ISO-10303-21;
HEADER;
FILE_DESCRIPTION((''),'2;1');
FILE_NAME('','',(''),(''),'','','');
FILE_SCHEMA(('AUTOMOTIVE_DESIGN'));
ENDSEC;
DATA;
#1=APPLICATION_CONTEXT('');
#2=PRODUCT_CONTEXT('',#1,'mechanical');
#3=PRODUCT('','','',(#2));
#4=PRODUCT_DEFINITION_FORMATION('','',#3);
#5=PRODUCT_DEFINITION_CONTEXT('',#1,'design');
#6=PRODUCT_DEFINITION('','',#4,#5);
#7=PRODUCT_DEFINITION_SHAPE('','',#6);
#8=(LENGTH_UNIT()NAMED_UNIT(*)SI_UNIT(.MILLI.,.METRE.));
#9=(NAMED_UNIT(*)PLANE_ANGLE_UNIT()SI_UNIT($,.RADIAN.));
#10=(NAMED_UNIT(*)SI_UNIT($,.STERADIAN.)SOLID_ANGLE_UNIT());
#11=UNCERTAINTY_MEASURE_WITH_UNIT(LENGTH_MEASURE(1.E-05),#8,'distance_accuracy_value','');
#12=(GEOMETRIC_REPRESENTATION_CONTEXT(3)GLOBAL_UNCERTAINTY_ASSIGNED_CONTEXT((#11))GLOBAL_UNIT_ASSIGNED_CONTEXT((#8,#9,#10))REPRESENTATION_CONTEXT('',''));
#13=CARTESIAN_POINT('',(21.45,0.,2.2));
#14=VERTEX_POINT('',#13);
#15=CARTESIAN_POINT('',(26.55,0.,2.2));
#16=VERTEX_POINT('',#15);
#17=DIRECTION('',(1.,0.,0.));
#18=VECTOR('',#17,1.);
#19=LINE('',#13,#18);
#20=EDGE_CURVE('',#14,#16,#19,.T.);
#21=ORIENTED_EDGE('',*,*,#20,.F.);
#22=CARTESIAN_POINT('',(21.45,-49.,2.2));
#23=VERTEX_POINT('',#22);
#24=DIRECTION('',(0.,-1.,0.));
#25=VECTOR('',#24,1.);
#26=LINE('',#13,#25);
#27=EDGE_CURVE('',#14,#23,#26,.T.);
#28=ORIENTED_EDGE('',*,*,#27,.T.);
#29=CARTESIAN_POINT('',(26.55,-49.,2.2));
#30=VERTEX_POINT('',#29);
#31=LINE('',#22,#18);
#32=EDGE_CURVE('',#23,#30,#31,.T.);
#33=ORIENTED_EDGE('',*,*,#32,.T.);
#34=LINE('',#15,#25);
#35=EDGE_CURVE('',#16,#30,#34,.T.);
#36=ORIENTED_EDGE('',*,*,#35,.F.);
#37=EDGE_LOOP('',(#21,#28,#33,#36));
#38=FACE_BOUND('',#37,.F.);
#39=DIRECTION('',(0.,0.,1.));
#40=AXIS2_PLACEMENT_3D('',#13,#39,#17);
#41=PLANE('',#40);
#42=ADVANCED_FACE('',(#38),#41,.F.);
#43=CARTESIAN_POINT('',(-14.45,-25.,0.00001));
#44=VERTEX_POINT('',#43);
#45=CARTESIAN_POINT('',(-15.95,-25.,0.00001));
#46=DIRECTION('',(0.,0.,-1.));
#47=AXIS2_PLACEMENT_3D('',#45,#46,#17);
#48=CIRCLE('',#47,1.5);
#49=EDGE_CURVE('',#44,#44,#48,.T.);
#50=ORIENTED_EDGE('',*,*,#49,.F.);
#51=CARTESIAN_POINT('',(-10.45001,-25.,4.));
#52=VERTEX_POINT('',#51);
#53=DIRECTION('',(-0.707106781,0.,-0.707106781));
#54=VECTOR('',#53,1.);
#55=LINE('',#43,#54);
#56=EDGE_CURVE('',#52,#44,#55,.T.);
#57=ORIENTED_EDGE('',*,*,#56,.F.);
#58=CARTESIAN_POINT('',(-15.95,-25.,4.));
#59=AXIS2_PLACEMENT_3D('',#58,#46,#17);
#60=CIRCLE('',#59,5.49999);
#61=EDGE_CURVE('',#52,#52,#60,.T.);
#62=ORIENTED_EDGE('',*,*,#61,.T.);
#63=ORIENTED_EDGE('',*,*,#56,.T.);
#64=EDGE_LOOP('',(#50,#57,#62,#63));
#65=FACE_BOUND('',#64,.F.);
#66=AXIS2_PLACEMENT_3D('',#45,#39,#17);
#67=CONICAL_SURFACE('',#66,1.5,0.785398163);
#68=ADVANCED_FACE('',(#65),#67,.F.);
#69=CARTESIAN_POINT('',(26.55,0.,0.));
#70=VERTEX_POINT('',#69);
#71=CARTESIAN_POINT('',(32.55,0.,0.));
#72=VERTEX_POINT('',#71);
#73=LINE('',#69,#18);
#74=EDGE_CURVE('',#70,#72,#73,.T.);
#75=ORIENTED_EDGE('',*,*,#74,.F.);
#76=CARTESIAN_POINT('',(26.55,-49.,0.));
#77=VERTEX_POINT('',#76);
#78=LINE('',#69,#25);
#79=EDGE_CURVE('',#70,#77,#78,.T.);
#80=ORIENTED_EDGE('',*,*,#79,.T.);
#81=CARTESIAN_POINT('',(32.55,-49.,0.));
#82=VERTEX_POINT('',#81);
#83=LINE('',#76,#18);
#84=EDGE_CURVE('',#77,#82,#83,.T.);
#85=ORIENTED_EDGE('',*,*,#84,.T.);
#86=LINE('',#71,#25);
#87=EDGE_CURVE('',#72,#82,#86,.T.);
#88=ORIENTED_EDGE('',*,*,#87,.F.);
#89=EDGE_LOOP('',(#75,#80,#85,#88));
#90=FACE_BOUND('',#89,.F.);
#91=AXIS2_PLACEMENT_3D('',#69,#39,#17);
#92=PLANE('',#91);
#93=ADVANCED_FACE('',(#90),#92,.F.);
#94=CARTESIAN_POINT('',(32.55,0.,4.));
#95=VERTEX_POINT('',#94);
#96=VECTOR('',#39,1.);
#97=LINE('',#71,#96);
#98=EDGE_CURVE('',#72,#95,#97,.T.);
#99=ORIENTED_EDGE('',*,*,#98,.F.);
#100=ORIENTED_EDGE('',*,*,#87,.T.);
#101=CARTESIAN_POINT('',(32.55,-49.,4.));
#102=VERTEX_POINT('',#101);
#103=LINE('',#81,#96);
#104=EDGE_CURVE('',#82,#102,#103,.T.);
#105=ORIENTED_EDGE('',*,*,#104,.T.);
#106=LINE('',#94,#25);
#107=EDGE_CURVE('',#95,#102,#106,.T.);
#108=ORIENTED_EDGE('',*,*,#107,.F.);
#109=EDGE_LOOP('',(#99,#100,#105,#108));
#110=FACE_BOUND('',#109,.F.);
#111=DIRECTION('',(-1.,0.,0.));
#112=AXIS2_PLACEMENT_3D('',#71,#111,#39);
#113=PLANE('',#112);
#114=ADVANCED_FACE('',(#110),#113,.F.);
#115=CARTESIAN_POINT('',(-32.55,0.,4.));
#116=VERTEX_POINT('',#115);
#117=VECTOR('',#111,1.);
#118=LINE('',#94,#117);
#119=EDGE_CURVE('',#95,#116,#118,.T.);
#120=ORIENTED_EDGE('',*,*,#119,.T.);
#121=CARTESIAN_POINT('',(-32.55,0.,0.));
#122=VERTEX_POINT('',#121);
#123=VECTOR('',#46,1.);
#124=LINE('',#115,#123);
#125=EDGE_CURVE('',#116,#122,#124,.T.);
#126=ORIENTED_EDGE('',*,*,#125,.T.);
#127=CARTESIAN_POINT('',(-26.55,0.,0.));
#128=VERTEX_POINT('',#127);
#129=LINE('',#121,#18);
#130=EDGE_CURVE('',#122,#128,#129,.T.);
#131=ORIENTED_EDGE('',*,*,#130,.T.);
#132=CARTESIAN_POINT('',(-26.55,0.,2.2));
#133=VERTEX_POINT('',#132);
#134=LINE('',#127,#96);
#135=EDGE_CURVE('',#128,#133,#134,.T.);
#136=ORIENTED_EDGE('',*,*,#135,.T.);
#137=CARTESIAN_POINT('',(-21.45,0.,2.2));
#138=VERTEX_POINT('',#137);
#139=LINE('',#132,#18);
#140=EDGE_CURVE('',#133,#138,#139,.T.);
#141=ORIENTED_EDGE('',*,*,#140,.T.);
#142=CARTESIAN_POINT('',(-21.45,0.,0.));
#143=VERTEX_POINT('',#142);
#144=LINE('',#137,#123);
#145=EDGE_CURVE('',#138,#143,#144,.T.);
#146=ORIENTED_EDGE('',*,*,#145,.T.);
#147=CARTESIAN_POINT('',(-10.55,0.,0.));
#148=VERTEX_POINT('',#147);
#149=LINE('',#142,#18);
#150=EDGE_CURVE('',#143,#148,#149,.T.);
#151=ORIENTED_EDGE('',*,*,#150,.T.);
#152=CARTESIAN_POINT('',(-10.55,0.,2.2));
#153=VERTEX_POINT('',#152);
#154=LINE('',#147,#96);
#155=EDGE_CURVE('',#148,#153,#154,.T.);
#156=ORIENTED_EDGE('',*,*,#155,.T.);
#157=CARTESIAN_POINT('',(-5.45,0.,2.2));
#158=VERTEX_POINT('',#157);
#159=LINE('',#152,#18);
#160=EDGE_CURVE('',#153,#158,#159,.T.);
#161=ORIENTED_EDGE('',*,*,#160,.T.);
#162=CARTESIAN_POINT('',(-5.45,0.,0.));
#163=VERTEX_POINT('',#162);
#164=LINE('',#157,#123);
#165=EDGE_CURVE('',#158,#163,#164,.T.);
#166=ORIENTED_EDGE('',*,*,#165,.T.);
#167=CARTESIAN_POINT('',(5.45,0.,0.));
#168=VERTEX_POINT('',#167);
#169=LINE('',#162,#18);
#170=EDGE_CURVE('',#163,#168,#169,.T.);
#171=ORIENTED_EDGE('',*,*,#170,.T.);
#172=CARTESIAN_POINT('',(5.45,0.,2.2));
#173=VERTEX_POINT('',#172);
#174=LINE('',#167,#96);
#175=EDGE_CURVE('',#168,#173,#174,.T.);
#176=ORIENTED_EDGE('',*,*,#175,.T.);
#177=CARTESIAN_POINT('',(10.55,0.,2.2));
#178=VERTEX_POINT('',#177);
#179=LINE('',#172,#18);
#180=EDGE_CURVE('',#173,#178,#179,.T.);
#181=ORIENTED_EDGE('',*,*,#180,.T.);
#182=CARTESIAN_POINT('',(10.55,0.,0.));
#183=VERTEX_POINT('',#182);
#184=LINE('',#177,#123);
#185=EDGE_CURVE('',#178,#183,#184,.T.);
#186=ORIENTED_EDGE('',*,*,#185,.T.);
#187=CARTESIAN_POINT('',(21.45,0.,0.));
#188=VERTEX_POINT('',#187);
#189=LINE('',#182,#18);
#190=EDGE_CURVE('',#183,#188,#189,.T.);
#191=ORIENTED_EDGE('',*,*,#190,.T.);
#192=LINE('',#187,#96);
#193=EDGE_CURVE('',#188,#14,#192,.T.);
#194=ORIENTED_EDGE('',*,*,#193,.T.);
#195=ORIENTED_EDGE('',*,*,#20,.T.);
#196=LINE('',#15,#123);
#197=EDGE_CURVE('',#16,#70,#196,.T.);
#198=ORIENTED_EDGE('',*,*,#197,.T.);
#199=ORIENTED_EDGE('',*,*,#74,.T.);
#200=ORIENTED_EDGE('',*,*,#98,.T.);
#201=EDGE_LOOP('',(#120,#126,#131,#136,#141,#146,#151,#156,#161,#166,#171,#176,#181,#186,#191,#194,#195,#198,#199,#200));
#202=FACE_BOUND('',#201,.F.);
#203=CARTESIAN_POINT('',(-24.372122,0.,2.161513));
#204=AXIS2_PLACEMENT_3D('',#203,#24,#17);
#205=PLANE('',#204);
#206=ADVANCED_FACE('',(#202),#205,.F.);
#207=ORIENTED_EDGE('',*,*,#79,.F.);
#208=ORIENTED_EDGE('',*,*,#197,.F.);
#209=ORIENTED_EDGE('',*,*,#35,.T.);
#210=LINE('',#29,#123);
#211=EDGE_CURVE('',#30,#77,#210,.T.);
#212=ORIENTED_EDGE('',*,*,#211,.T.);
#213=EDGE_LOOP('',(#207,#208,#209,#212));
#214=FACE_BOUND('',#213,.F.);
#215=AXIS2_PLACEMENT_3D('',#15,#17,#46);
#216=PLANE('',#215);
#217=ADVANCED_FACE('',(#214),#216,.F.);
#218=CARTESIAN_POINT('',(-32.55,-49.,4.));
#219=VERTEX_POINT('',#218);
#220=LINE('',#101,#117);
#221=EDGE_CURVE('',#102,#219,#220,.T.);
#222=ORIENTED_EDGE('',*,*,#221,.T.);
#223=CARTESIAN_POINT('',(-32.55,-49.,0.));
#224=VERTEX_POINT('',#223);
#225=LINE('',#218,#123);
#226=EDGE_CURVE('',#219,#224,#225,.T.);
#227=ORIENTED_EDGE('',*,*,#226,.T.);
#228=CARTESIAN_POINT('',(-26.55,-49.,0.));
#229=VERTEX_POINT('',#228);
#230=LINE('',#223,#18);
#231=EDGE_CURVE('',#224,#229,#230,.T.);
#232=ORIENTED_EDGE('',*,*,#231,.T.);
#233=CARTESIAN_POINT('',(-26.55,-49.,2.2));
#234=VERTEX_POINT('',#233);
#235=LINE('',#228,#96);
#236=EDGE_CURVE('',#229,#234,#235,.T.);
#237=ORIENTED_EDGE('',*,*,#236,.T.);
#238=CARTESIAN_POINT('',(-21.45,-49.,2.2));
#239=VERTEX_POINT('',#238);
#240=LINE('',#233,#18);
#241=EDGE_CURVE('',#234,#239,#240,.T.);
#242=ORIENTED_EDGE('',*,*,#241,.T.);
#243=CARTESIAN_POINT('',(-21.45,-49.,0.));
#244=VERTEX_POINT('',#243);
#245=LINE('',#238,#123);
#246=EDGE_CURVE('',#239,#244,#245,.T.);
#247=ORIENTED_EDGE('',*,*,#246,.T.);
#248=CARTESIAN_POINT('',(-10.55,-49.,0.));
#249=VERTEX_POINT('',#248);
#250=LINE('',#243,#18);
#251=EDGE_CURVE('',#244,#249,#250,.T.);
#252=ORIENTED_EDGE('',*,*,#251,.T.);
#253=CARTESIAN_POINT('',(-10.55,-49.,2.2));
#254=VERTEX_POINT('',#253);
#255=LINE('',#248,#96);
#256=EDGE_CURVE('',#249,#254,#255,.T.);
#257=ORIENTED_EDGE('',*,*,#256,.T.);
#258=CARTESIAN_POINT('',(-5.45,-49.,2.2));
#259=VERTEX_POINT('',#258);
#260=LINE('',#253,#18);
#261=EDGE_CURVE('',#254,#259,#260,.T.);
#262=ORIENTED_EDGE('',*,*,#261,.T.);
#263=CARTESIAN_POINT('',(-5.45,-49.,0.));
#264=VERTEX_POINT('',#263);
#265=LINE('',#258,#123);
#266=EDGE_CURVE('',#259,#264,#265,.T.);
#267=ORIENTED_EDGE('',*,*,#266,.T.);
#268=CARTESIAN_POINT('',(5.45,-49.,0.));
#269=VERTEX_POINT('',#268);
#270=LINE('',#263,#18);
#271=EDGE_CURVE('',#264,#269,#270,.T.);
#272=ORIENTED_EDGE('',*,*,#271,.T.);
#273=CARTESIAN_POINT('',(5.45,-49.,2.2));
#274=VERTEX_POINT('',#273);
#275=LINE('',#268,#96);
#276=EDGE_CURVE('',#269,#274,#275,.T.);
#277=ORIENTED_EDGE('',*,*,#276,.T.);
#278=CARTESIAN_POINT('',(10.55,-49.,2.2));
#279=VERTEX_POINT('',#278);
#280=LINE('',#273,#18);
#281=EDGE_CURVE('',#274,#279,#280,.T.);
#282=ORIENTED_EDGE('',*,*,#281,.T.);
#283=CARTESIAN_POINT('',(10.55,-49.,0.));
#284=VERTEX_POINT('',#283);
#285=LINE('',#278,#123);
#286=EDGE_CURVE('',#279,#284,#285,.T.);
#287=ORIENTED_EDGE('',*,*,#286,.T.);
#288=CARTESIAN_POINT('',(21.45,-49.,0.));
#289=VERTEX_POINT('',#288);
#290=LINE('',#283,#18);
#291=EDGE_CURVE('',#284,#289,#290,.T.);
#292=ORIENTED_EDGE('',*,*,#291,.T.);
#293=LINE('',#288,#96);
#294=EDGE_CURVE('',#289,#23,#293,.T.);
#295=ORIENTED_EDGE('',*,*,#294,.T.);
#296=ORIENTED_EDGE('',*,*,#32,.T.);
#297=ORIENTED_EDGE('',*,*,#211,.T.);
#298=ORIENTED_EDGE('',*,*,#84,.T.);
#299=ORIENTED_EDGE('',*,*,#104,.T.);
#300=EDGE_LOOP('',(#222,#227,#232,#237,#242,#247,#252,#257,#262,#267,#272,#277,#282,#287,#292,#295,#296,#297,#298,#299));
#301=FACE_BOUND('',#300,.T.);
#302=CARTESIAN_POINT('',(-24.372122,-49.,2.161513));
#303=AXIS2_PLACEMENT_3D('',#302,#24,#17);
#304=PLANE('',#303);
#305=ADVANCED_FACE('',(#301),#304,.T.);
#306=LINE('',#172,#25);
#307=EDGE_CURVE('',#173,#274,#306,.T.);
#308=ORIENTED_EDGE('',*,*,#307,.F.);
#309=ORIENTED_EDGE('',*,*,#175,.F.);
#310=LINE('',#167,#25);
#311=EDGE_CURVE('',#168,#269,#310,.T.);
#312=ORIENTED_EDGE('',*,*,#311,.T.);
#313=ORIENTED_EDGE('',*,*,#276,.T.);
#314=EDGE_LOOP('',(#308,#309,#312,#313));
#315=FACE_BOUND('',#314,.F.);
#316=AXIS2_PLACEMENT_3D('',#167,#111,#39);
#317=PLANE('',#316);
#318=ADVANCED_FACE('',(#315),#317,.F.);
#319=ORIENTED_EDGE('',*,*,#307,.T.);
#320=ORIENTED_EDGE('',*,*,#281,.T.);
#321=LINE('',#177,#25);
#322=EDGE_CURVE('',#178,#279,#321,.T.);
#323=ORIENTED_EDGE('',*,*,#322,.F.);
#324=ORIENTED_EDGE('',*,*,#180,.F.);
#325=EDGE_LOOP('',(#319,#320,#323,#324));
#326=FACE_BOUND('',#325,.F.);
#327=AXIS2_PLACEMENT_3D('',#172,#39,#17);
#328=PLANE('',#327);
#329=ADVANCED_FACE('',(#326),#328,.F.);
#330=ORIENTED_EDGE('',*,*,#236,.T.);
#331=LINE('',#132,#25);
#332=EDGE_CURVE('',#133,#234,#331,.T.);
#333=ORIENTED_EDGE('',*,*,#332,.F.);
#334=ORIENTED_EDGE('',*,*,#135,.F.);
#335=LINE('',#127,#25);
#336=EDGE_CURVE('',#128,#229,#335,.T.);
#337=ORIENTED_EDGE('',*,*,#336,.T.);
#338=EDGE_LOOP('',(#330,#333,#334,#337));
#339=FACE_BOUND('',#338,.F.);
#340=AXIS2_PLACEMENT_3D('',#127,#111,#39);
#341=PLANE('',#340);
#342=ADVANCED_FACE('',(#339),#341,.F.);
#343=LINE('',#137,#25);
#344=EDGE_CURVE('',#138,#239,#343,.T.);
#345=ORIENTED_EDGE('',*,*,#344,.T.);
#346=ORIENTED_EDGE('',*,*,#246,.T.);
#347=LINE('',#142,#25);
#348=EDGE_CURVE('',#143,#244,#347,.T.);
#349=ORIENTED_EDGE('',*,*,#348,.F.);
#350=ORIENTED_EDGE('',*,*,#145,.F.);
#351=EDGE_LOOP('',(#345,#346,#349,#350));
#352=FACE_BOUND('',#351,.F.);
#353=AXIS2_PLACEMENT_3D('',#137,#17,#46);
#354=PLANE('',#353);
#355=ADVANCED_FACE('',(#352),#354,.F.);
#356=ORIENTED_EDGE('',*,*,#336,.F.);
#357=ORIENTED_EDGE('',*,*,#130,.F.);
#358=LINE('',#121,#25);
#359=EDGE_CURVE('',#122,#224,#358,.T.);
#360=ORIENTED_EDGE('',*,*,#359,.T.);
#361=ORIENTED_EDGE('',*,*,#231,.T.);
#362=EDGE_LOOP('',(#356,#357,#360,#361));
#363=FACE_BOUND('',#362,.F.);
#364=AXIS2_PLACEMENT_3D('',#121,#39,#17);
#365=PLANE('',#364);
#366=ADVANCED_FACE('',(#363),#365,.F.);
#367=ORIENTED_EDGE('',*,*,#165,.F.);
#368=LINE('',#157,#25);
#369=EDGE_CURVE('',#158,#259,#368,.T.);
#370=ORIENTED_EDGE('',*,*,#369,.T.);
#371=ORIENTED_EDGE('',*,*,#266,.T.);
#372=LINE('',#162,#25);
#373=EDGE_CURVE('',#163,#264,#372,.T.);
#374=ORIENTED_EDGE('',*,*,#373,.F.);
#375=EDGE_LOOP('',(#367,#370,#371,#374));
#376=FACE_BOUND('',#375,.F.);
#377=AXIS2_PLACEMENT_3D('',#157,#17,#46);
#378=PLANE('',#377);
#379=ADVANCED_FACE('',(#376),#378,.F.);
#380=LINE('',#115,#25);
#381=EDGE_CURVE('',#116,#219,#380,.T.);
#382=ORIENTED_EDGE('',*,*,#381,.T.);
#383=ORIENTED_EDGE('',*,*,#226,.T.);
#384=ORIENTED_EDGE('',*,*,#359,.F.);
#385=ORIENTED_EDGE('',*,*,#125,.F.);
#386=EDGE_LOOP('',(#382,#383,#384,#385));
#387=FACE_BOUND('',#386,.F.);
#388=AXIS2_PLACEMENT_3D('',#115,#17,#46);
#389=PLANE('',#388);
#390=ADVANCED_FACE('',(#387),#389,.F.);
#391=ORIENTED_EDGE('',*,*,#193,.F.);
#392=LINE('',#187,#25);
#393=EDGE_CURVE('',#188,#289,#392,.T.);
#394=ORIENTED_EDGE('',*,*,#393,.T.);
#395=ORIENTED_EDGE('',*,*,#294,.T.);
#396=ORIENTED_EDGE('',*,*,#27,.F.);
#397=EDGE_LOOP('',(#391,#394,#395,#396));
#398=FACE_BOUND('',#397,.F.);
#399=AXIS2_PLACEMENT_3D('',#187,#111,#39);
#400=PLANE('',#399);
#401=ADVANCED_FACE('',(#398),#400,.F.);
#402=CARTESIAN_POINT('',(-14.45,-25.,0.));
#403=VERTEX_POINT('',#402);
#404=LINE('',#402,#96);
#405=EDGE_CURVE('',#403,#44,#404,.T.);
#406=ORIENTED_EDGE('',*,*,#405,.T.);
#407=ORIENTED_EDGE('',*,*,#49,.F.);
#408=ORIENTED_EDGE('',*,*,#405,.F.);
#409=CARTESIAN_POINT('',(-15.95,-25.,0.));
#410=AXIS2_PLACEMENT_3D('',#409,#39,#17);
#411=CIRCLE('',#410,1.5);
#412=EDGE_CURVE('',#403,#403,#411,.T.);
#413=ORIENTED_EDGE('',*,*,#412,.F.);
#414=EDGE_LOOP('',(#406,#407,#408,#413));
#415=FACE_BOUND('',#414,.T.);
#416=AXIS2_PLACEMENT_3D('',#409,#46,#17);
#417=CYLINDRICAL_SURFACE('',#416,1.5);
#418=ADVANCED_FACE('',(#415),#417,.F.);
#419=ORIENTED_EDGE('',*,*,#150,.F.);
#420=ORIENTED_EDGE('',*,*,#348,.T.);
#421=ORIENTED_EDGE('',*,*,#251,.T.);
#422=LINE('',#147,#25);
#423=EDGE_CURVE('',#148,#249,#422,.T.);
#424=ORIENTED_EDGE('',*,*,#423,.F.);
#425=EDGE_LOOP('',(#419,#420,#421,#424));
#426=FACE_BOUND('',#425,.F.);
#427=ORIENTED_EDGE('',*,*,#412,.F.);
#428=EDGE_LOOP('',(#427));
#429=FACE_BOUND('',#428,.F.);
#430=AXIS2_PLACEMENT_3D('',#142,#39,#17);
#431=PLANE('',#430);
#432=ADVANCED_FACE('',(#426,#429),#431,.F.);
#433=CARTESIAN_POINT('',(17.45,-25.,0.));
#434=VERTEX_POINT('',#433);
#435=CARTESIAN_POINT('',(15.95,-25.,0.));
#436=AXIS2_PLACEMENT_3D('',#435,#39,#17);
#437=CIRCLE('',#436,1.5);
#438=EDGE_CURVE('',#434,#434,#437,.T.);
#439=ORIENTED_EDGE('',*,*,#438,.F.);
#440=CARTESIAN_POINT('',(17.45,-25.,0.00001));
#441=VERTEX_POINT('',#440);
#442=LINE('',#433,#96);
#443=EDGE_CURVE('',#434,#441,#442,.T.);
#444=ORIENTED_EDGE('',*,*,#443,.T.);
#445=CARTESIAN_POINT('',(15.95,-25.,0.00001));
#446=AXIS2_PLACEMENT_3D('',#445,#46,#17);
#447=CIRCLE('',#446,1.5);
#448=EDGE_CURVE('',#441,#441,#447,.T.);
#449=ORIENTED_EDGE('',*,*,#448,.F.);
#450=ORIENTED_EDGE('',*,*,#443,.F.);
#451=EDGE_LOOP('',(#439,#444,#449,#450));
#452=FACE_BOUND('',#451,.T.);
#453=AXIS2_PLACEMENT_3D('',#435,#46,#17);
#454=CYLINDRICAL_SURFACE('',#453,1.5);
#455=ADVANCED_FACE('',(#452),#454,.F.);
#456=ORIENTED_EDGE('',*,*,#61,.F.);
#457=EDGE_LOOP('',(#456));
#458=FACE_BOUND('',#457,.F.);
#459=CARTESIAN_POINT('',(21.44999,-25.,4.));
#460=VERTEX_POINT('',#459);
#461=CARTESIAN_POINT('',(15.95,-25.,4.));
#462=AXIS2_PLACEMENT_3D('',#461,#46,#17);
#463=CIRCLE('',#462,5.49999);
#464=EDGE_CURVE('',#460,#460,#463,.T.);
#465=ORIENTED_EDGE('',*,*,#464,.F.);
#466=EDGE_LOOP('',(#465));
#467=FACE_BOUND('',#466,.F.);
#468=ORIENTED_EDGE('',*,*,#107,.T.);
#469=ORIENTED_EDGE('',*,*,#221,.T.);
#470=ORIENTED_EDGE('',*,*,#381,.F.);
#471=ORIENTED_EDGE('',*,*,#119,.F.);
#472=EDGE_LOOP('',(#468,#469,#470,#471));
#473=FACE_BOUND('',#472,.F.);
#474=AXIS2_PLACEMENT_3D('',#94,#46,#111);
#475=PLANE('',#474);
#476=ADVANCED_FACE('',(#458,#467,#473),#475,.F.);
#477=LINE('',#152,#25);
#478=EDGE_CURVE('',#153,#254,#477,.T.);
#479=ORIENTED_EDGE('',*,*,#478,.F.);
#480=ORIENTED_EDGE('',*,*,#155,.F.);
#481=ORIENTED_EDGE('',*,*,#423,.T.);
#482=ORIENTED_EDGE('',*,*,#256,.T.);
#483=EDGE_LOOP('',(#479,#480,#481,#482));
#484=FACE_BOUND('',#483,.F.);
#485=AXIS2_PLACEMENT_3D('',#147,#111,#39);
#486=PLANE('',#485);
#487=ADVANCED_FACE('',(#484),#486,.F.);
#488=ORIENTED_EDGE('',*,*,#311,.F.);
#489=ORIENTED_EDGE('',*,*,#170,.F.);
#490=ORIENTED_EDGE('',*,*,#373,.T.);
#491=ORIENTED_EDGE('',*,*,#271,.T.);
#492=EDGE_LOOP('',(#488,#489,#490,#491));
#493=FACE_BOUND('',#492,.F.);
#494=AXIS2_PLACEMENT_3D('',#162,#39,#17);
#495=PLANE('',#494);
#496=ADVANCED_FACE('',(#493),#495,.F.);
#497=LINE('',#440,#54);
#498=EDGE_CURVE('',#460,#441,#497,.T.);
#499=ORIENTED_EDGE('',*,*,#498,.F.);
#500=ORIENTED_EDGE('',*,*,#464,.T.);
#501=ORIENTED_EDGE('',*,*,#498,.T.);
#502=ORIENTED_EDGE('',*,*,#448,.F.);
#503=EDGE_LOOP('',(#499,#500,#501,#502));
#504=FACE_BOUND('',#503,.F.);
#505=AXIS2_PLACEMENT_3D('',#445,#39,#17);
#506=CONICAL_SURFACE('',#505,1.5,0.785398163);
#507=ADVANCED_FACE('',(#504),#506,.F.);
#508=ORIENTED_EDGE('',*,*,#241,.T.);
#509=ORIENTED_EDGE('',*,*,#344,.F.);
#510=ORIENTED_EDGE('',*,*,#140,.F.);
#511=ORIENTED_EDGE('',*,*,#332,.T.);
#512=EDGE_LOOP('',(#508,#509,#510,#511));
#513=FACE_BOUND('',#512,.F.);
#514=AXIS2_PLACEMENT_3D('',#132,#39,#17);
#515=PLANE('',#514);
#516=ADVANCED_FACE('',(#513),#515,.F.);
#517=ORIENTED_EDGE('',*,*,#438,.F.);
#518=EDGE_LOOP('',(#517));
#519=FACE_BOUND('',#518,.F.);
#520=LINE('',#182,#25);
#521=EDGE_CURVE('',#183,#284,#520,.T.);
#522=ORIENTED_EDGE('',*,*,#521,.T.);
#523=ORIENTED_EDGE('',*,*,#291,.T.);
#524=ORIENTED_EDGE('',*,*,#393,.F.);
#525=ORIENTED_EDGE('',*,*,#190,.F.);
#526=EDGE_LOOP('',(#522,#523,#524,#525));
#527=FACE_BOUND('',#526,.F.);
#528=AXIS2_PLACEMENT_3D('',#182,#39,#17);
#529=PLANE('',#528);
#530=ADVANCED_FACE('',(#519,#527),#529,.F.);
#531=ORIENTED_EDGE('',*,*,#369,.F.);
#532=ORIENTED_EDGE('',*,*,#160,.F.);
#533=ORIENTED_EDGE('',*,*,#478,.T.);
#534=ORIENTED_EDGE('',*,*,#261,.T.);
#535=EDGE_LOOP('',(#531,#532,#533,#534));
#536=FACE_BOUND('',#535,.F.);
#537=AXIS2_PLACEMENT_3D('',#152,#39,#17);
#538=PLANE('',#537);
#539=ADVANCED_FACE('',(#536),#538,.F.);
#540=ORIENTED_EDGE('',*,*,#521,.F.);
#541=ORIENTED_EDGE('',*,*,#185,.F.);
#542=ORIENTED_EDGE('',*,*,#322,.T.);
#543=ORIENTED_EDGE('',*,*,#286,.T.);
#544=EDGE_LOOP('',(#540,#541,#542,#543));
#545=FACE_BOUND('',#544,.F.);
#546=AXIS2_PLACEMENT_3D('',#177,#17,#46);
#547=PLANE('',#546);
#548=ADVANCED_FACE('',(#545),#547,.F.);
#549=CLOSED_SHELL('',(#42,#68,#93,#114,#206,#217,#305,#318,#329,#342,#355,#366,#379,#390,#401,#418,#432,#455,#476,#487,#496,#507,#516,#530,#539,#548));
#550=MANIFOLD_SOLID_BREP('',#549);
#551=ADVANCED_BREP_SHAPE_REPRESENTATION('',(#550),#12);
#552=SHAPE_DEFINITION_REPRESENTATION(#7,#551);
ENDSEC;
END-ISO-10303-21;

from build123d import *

# Parameters (mm, degrees)
F1_DEPTH      = 49
F2_R          = 1.5
F3_DEPTH      = 25
F3_DEPTH_BACK = 25
F4_DEPTH      = 12.4
F5_SIZE       = 3.99999


# Not quite as in the source:
# - a fillet or chamfer is up to 0.001 mm smaller than in the source, because OpenCascade refuses the exact size
# - a feature names something its author has since deleted; it is built from what else it names


with BuildPart() as f1:
    # F0 (on Front) → F1 (new body)
    with BuildSketch(Plane.XZ):
        Polygon((-16.275, 4), (-32.55, 4), (-32.55, 0), (-26.55, 0), (-26.55, 2.2), (-21.45, 2.2), (-21.45, 0), (-16.275, 0), align=None)
        Polygon((0, 4), (-16.275, 4), (-16.275, 0), (-10.55, 0), (-10.55, 2.2), (-5.45, 2.2), (-5.45, 0), (0, 0), align=None)
        Polygon((16.275, 4), (0, 4), (0, 0), (5.45, 0), (5.45, 2.2), (10.55, 2.2), (10.55, 0), (16.275, 0), align=None)
        Polygon((32.55, 4), (16.275, 4), (16.275, 0), (21.45, 0), (21.45, 2.2), (26.55, 2.2), (26.55, 0), (32.55, 0), align=None)
    extrude(amount=F1_DEPTH)

    # F2 (on Top) → F3 (cut, two sides)
    with BuildSketch(Plane.XY) as f3_sk:
        with Locations((-15.95, -25)):
            Circle(F2_R)
    extrude(amount=-F3_DEPTH, mode=Mode.SUBTRACT)
    extrude(f3_sk.sketch, amount=F3_DEPTH_BACK, mode=Mode.SUBTRACT)

    # F2 (on Top) → F4 (cut)
    with BuildSketch(Plane.XY):
        with Locations((-15.95, -25)):
            Circle(F2_R)
        with Locations((15.95, -25)):
            Circle(F2_R)
    extrude(amount=F4_DEPTH, mode=Mode.SUBTRACT)

    # F5 (size 4 in the source; OpenCascade refuses exactly that, so slightly less here)
    f5_edges = [f1.edges().sort_by_distance(p)[0] for p in [
        (14.45, -25, 4),
        (-17.45, -25, 4),
    ]]
    chamfer(f5_edges, length=F5_SIZE)


solid = f1.part
